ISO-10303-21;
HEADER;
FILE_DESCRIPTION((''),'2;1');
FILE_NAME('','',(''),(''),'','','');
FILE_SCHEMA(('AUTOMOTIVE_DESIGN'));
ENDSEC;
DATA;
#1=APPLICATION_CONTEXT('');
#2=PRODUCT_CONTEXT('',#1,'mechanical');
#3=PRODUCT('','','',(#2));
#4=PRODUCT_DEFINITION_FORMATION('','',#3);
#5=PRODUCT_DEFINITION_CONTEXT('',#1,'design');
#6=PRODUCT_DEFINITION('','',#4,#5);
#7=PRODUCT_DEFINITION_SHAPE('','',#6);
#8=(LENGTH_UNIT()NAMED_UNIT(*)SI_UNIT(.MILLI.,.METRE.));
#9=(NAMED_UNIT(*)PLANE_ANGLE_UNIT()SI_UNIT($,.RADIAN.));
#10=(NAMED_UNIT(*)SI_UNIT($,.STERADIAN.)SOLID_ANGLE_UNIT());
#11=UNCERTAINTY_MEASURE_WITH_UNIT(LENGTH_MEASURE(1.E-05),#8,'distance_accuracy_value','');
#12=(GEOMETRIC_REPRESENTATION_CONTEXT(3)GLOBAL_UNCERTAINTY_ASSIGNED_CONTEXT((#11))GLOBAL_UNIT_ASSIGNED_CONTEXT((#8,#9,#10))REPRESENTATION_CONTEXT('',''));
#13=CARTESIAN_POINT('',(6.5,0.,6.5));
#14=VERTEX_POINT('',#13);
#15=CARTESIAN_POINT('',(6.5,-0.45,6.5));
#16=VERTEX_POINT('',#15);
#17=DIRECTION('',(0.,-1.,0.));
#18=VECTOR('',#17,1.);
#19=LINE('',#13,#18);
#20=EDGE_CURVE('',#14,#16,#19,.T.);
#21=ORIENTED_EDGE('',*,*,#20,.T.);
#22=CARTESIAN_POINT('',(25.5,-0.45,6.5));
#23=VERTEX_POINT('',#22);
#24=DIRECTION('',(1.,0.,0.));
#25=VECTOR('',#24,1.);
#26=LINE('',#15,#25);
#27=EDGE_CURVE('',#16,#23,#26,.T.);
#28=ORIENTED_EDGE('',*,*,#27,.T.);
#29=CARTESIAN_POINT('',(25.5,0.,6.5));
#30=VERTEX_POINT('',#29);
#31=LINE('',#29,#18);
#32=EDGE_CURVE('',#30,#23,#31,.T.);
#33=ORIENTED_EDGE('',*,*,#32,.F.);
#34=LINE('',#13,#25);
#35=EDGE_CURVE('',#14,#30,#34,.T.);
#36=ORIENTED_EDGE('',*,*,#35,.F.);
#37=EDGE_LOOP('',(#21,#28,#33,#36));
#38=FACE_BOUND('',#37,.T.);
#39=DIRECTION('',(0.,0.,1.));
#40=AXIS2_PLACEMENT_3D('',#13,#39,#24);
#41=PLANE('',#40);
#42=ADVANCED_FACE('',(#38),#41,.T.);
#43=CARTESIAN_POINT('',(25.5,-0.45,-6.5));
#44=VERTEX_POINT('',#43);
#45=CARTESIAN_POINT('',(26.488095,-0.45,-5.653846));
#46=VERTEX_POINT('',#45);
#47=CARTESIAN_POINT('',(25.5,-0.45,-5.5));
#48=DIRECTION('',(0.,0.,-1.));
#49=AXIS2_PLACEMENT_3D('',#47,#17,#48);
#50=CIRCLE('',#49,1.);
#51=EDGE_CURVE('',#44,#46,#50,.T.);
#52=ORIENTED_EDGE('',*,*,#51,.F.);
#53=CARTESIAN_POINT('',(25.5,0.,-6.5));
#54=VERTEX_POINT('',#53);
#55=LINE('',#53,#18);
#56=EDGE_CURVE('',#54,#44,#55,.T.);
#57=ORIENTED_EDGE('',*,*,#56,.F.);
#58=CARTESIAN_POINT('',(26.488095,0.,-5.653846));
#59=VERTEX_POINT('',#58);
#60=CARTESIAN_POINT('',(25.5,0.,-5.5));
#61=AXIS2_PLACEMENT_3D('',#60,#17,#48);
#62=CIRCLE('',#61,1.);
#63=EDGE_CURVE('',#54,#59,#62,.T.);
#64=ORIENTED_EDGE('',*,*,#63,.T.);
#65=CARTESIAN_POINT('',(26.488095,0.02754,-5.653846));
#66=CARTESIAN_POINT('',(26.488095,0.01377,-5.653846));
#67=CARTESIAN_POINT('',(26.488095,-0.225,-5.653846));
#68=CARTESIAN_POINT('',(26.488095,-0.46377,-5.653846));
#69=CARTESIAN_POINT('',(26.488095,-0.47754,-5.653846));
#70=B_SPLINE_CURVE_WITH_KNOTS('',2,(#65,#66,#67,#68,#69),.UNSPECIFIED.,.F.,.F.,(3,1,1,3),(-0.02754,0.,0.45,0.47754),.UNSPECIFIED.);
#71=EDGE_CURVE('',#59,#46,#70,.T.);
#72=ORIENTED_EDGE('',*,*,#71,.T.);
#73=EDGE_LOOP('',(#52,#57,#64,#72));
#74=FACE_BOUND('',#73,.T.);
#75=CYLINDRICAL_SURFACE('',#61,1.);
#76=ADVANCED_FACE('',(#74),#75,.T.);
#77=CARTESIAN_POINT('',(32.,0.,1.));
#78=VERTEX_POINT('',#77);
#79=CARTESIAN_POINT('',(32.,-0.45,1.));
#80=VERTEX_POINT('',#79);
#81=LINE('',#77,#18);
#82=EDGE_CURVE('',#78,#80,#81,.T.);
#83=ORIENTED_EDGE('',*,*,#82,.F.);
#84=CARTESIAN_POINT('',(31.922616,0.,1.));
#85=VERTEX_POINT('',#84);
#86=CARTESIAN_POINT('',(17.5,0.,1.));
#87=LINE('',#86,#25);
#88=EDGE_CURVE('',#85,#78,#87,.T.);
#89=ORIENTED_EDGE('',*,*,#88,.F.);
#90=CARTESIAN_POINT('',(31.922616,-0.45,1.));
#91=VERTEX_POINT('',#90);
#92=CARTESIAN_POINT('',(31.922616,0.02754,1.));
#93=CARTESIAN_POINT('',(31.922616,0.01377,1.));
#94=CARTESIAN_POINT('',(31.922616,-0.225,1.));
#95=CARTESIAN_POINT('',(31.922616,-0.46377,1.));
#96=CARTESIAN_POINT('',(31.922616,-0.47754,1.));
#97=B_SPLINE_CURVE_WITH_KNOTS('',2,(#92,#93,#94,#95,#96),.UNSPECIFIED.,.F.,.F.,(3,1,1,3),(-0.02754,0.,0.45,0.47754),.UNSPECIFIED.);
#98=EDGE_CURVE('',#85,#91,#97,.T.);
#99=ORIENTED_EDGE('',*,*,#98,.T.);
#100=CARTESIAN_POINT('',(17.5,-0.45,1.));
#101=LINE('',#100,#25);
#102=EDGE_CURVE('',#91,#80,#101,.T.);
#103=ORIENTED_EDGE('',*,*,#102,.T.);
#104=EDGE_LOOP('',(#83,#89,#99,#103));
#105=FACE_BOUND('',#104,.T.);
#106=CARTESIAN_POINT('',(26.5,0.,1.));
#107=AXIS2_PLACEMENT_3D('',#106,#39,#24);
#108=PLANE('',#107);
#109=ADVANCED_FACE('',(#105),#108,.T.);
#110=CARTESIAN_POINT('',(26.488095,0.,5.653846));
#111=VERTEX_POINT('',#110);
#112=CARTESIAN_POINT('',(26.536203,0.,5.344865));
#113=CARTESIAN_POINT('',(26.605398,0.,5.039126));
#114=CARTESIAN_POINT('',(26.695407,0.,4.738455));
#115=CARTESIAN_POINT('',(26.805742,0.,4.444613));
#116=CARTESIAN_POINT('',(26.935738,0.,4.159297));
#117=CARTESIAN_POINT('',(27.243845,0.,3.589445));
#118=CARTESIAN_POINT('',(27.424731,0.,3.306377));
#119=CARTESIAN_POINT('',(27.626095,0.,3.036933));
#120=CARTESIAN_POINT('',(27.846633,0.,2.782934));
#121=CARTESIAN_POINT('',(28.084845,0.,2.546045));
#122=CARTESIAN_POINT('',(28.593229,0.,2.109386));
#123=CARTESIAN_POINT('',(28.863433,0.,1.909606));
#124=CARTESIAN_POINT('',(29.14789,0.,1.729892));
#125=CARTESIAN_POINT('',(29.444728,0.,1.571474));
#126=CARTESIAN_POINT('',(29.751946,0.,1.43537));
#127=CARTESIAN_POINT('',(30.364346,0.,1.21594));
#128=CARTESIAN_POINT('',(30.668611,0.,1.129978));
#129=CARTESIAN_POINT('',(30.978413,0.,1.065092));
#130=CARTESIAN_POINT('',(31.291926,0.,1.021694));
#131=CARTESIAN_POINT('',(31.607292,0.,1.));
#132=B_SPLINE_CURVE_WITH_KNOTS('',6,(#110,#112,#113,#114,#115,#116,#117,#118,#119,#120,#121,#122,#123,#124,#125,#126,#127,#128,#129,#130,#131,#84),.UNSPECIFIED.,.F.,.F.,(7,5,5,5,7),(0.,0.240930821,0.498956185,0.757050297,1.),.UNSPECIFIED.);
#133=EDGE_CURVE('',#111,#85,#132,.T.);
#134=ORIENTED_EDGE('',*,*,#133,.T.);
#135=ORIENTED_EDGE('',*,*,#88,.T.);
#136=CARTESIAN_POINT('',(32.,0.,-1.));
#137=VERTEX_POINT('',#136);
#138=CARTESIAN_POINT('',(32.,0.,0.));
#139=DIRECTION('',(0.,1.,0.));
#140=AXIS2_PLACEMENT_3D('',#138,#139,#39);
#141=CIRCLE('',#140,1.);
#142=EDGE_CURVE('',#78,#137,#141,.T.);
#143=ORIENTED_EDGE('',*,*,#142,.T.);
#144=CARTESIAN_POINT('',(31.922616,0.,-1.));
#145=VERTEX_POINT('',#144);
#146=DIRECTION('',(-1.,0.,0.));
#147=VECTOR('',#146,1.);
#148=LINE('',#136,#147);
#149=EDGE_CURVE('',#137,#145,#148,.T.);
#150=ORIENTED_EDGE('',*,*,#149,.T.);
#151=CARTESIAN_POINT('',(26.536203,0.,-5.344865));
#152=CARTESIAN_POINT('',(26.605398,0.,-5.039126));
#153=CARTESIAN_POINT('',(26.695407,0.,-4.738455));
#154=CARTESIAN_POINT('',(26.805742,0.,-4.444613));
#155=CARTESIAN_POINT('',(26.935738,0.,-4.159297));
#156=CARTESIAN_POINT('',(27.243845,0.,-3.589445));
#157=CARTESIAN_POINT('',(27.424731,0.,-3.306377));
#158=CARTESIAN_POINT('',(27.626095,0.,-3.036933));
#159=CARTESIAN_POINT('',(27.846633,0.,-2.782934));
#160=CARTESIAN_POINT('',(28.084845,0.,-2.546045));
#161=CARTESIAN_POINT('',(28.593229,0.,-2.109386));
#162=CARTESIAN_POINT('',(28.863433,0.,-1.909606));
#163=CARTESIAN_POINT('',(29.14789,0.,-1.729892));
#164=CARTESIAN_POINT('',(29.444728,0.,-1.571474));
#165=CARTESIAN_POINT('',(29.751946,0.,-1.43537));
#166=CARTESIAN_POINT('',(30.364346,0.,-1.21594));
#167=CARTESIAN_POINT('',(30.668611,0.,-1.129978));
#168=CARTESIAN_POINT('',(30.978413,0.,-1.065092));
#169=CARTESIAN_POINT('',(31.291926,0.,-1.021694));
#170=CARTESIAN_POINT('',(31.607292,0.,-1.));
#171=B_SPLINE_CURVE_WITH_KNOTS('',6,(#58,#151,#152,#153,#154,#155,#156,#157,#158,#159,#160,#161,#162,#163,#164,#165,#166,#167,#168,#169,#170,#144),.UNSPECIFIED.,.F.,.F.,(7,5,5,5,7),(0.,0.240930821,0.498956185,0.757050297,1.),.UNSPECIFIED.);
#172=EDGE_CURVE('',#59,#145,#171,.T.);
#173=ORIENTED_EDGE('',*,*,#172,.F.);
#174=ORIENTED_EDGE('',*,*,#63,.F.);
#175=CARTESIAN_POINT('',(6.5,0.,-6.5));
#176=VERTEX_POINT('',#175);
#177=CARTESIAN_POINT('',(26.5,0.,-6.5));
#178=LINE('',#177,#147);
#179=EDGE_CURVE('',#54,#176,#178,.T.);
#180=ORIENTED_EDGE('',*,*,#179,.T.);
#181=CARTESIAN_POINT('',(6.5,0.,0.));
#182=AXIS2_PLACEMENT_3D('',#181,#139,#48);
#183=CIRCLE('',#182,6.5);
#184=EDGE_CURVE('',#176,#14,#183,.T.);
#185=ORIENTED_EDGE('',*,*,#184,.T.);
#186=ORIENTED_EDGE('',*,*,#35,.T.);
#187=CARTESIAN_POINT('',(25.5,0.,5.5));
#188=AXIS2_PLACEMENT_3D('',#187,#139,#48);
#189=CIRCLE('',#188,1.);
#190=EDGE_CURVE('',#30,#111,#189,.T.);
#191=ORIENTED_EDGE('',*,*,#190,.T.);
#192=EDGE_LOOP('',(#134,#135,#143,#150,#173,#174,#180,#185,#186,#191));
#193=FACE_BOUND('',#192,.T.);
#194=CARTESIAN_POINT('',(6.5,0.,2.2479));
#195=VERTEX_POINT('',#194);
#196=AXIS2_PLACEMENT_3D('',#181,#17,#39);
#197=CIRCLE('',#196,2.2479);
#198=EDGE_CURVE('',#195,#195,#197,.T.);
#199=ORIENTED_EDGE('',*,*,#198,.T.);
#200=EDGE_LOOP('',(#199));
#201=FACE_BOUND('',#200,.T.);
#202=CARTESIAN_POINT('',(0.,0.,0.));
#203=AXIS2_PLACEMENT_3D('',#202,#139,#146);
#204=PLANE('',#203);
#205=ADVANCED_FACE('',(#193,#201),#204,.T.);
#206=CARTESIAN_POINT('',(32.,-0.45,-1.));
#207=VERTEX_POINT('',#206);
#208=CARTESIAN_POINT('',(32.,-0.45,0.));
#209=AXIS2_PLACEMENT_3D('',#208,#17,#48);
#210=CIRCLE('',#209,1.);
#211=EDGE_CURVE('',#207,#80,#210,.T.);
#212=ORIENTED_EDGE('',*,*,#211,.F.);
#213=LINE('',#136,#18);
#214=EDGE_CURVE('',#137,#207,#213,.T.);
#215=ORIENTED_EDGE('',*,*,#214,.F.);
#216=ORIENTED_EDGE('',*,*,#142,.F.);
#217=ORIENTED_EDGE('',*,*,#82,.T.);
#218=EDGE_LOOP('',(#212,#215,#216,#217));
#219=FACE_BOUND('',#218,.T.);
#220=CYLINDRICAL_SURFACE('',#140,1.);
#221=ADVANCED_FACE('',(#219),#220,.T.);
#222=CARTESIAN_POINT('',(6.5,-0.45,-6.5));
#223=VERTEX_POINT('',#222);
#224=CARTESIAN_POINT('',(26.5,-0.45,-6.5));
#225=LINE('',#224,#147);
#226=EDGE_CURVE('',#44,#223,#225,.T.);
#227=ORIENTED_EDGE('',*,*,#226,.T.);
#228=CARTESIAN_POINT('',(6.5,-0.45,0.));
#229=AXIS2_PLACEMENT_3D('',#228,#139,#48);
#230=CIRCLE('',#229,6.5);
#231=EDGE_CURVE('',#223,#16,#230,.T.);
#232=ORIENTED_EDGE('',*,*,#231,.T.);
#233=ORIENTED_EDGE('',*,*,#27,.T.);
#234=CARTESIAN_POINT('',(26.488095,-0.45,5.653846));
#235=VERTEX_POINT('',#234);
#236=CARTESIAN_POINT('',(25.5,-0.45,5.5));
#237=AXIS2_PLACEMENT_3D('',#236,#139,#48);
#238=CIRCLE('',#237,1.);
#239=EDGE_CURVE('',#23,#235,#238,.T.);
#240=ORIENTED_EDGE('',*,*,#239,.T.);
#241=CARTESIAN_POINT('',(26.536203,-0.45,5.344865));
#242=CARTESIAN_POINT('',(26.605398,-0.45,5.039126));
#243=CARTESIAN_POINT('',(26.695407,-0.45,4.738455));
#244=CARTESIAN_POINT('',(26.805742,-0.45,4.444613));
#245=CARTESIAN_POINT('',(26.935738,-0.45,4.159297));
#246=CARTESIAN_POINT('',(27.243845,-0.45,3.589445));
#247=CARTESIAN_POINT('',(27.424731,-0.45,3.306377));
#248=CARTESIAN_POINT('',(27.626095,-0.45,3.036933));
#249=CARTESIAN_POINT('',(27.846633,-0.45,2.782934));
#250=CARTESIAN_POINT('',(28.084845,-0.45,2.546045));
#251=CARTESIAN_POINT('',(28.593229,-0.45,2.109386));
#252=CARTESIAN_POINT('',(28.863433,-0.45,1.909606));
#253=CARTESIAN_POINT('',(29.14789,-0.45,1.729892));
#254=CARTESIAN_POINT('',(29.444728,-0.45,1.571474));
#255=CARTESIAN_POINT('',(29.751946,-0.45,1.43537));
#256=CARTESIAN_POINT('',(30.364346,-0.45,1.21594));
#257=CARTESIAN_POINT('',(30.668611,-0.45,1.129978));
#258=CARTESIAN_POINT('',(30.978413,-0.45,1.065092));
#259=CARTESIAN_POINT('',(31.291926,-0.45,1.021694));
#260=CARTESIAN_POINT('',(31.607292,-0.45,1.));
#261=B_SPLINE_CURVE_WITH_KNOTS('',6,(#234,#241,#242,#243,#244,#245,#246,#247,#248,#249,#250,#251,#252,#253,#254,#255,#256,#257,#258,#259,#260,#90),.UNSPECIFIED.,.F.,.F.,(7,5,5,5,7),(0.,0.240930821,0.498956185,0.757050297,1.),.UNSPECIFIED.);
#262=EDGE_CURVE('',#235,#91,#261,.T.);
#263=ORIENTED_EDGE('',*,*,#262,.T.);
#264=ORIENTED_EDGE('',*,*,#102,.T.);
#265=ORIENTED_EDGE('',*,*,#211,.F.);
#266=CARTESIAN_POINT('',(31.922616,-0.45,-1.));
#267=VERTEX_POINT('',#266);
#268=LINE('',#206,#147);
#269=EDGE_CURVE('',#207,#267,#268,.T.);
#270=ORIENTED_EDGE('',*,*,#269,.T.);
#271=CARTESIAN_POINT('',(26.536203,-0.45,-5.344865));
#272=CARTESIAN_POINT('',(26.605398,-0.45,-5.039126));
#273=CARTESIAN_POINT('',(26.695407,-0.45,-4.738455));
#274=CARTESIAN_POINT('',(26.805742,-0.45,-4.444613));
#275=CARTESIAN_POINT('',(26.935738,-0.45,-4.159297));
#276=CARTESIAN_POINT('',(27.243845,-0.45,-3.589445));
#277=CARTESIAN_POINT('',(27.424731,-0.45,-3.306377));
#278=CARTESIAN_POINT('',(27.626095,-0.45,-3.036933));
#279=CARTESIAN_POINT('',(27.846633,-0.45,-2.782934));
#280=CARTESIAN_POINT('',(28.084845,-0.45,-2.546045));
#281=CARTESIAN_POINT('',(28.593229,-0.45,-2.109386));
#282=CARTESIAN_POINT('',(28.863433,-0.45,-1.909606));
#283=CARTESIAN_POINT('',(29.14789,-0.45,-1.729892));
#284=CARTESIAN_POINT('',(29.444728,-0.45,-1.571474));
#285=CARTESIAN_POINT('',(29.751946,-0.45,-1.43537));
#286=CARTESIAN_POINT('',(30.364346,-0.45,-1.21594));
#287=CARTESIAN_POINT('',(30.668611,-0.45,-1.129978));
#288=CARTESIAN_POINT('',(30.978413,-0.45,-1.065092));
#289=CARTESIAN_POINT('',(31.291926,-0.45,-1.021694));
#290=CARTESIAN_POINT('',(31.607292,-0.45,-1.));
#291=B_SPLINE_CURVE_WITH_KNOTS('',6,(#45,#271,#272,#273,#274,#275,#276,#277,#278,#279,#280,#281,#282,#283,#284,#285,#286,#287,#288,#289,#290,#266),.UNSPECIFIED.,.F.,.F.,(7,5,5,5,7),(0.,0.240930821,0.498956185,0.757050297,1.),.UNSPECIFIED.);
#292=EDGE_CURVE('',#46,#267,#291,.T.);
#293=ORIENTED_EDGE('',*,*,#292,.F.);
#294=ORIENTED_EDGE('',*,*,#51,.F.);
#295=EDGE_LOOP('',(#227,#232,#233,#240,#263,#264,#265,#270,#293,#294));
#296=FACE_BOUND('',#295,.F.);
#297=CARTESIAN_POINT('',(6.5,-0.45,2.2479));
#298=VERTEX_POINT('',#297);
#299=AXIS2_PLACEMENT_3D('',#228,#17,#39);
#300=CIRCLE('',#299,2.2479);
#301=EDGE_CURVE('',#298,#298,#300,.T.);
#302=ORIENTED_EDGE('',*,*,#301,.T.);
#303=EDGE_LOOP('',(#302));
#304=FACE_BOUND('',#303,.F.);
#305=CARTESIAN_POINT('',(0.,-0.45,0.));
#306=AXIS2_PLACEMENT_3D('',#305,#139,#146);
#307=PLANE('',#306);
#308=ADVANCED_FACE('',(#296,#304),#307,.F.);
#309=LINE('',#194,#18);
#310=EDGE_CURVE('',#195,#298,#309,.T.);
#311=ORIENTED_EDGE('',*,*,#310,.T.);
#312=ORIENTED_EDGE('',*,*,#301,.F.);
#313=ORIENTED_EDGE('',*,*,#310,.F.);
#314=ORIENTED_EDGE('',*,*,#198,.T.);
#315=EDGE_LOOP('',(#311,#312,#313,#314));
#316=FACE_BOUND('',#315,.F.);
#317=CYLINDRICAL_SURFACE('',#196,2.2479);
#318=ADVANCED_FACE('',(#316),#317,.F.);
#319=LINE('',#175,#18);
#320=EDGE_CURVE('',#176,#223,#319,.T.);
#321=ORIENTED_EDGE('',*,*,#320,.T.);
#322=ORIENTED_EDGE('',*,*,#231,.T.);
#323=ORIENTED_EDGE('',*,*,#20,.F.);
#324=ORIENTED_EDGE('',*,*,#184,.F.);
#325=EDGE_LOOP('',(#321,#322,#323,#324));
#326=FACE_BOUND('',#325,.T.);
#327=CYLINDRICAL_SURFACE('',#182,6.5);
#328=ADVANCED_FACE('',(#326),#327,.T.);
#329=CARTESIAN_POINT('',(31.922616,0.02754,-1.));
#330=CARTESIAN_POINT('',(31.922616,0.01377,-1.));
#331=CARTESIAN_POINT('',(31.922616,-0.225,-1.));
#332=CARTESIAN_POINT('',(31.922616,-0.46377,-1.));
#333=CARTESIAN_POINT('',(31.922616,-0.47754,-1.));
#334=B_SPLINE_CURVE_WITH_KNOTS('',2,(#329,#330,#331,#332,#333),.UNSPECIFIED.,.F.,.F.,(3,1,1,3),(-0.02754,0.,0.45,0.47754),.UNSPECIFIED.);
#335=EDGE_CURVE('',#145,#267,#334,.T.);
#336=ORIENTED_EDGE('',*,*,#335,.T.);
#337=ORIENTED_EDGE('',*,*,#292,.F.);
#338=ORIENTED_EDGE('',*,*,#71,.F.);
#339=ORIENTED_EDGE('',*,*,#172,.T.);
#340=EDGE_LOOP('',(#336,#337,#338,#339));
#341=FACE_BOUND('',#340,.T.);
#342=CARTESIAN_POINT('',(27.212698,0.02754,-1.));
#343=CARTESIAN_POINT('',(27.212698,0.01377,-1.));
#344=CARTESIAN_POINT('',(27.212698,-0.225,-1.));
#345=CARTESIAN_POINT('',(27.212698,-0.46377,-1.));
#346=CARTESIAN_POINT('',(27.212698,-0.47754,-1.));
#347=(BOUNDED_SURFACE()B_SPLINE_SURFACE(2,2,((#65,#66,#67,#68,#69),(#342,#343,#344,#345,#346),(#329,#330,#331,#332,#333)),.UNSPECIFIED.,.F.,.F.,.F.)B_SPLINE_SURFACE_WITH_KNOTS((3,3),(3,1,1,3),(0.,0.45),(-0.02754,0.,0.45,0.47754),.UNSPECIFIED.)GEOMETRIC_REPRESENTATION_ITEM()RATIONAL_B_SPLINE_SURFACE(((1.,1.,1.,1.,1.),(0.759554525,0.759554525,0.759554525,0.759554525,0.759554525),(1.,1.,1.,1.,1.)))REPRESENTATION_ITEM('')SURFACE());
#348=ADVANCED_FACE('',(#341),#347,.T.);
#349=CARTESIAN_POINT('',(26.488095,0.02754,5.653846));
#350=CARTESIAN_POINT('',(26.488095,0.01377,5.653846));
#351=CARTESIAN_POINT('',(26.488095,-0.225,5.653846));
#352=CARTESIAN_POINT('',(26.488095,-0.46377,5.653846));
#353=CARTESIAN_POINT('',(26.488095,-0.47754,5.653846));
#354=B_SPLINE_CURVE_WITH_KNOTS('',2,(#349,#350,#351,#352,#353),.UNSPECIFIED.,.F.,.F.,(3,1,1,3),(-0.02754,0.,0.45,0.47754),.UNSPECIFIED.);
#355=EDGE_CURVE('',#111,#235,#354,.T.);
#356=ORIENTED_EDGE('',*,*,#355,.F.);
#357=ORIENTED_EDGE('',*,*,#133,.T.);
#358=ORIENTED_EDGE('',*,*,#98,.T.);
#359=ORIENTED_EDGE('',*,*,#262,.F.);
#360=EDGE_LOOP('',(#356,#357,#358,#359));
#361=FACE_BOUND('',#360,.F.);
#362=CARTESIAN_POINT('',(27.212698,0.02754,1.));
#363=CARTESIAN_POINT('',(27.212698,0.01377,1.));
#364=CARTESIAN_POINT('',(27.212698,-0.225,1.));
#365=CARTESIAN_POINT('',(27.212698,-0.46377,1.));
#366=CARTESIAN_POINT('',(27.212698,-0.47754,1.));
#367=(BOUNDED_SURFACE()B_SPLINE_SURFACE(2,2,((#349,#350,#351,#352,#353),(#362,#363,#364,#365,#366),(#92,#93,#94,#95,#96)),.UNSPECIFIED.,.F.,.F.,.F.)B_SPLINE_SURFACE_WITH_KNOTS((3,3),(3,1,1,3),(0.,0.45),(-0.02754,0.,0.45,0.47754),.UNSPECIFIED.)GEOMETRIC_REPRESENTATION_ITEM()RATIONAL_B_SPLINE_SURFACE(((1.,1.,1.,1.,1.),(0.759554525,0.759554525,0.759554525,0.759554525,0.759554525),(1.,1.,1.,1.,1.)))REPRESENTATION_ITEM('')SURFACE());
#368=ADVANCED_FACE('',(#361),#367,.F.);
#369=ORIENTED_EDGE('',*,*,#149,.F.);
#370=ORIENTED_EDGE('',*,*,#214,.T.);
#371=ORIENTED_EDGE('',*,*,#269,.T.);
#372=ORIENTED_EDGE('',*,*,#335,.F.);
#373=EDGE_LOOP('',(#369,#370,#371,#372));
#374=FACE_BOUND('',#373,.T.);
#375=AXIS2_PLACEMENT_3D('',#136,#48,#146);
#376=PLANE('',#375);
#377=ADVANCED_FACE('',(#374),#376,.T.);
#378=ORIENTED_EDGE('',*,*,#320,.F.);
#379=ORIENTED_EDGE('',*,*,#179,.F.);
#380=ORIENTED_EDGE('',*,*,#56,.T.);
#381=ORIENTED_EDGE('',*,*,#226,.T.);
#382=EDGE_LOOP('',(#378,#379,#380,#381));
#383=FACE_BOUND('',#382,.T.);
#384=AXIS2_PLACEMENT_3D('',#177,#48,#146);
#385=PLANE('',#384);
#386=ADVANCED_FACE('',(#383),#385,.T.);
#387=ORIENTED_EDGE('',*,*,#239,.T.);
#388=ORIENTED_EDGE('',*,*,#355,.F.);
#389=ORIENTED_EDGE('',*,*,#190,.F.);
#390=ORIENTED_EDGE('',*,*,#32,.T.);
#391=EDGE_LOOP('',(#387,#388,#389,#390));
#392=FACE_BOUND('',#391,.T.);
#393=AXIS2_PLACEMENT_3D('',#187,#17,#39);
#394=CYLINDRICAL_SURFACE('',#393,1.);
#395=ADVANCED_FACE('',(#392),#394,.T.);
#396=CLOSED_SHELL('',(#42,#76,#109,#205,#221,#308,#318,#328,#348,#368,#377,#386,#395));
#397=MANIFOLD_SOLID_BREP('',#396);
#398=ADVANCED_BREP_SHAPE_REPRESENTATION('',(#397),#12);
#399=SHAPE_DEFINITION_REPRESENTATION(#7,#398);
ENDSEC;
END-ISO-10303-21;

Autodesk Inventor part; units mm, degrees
ref_plane "YZ Plane" through (0, 0, 0) normal (1, 0, 0) x (0, 1, 0)
ref_plane "XZ Plane" through (0, 0, 0) normal (0, 1, 0) x (-1, 0, 0)
ref_plane "XY Plane" through (0, 0, 0) normal (0, 0, 1) x (1, 0, 0)
sketch "Sketch1" plane through (0, 0, 0) normal (0, 1, 0) x (-1, 0, 0)
  line L0 (0, 0) -> (-33, 0) construction
  line L1 (-6.5, 6.5) -> (-26.5, 6.5)
  line L2 (-26.5, -6.5) -> (-6.5, -6.5)
  arc A0 (-6.5, -6.5) -> (-6.5, 6.5) centre (-6.5, 0) ccw
  arc A1 (-26.5, 6.5) -> (-26.5, -6.5) centre (-26.5, 0) ccw
  circle A2 centre (-6.5, 0) radius 2
  line L3 (-22.6527, -1.0329) -> (-22.6527, 4.8111) construction
  line L4 (-22.6527, 4.8111) -> (-19.4837, 4.8111) construction
  line L5 (-19.4837, 4.8111) -> (-19.4837, -1.0329) construction
  line L6 (-19.4837, -1.0329) -> (-22.6527, -1.0329) construction
  line L7 (-26.5, 0) -> (-33, 0) construction
  line L8 (-26.5, -6.5) -> (-26.5, 6.5)
  line L9 (-33, 0) -> (-16.5, 0) construction
  line L10 (-32, -1) -> (-17.5, -1)
  line L11 (-17.5, 1) -> (-32, 1)
  arc A3 (-32, 1) -> (-32, -1) centre (-32, 0) ccw
  arc A4 (-17.5, -1) -> (-17.5, 1) centre (-17.5, 0) ccw
  line L12 (-22.6527, 0.0867) -> (-19.5369, 0.0867)
  line L13 (-19.5369, 0.0867) -> (-19.5369, -0.1112)
  line L14 (-19.5369, -0.1112) -> (-22.3445, -0.1112)
  spline S0 degree 2 poles (-22.3445, -0.1112) (-22.2032, -0.2582) (-21.9996, -0.6343) (-21.9204, -0.8576) knots 0 0 0 1 2 2 2
  line L15 (-21.9204, -0.8576) -> (-22.0985, -0.8576)
  spline S1 degree 2 poles (-22.0985, -0.8576) (-22.1438, -0.7219) (-22.2569, -0.4929) (-22.3926, -0.2836) (-22.5566, -0.0857) (-22.6527, 0.0161) knots 0 0 0 1 2 3 4 4 4
  line L16 (-22.6527, 0.0161) -> (-22.6527, 0.0867)
  point P0 (-29.75, 0)
  point P1 (-24.75, 0)
  point P2 (-26.5, -1)
  point P3 (-26.5, 1)
  dimension "d0" = 33
  dimension "d1" = 13
  dimension "d2" = 4
  dimension "d18" = 2
  dimension "d19" = 5.5
extrude "Plate1" add sketch "Sketch1" against normal blind 0.45 contours A0 L2 L8 L10 A4 L11 L1 | A3 L11 L8 L10 | L11 A4 L10 L8 | A2 | L12 L13 L14 S0 L15 S1 L16
hole "Hole1" at (6.5, 0, 0) direction (0, -1, 0) diameter 4.4958 end through all clearance for "Socket Head Cap Screw" size "M4" standard "Ansi Metric M Profile"
emboss "Emboss2" sketch "Sketch1" operation cut depth 0.01 direction (0, -1, 0) draft 45 contours L12 L13 L14 S0 L15 S1 L16
fillet "Fillet1" radius 1 2 edges at (26.5, -0.225, 6.5) (26.5, -0.225, -6.5)
fillet "Fillet3" radius 5.5 2 edges at (26.5, -0.225, 1) (26.5, -0.225, -1)
equation "\"d9\" = Thickness"
equation "\"d20\" = d19"
equation "\"d3\" = Thickness"
equation "\"BendRadius\" = Thickness"
equation "\"BendReliefWidth\" = Thickness"
equation "\"BendReliefDepth\" = 0.5 * Thickness"
equation "\"CornerReliefSize\" = 4 * Thickness"
equation "\"MinimumRemnant\" = 2 * Thickness"
equation "\"TransitionRadius\" = BendRadius"
equation "\"JacobiRadiusSize\" = BendRadius"
equation "\"GapSize\" = Thickness"
equation "\"Thickness\" = 0.45"
properties part number "Part16.5mm" material "Steel, Carbon"
